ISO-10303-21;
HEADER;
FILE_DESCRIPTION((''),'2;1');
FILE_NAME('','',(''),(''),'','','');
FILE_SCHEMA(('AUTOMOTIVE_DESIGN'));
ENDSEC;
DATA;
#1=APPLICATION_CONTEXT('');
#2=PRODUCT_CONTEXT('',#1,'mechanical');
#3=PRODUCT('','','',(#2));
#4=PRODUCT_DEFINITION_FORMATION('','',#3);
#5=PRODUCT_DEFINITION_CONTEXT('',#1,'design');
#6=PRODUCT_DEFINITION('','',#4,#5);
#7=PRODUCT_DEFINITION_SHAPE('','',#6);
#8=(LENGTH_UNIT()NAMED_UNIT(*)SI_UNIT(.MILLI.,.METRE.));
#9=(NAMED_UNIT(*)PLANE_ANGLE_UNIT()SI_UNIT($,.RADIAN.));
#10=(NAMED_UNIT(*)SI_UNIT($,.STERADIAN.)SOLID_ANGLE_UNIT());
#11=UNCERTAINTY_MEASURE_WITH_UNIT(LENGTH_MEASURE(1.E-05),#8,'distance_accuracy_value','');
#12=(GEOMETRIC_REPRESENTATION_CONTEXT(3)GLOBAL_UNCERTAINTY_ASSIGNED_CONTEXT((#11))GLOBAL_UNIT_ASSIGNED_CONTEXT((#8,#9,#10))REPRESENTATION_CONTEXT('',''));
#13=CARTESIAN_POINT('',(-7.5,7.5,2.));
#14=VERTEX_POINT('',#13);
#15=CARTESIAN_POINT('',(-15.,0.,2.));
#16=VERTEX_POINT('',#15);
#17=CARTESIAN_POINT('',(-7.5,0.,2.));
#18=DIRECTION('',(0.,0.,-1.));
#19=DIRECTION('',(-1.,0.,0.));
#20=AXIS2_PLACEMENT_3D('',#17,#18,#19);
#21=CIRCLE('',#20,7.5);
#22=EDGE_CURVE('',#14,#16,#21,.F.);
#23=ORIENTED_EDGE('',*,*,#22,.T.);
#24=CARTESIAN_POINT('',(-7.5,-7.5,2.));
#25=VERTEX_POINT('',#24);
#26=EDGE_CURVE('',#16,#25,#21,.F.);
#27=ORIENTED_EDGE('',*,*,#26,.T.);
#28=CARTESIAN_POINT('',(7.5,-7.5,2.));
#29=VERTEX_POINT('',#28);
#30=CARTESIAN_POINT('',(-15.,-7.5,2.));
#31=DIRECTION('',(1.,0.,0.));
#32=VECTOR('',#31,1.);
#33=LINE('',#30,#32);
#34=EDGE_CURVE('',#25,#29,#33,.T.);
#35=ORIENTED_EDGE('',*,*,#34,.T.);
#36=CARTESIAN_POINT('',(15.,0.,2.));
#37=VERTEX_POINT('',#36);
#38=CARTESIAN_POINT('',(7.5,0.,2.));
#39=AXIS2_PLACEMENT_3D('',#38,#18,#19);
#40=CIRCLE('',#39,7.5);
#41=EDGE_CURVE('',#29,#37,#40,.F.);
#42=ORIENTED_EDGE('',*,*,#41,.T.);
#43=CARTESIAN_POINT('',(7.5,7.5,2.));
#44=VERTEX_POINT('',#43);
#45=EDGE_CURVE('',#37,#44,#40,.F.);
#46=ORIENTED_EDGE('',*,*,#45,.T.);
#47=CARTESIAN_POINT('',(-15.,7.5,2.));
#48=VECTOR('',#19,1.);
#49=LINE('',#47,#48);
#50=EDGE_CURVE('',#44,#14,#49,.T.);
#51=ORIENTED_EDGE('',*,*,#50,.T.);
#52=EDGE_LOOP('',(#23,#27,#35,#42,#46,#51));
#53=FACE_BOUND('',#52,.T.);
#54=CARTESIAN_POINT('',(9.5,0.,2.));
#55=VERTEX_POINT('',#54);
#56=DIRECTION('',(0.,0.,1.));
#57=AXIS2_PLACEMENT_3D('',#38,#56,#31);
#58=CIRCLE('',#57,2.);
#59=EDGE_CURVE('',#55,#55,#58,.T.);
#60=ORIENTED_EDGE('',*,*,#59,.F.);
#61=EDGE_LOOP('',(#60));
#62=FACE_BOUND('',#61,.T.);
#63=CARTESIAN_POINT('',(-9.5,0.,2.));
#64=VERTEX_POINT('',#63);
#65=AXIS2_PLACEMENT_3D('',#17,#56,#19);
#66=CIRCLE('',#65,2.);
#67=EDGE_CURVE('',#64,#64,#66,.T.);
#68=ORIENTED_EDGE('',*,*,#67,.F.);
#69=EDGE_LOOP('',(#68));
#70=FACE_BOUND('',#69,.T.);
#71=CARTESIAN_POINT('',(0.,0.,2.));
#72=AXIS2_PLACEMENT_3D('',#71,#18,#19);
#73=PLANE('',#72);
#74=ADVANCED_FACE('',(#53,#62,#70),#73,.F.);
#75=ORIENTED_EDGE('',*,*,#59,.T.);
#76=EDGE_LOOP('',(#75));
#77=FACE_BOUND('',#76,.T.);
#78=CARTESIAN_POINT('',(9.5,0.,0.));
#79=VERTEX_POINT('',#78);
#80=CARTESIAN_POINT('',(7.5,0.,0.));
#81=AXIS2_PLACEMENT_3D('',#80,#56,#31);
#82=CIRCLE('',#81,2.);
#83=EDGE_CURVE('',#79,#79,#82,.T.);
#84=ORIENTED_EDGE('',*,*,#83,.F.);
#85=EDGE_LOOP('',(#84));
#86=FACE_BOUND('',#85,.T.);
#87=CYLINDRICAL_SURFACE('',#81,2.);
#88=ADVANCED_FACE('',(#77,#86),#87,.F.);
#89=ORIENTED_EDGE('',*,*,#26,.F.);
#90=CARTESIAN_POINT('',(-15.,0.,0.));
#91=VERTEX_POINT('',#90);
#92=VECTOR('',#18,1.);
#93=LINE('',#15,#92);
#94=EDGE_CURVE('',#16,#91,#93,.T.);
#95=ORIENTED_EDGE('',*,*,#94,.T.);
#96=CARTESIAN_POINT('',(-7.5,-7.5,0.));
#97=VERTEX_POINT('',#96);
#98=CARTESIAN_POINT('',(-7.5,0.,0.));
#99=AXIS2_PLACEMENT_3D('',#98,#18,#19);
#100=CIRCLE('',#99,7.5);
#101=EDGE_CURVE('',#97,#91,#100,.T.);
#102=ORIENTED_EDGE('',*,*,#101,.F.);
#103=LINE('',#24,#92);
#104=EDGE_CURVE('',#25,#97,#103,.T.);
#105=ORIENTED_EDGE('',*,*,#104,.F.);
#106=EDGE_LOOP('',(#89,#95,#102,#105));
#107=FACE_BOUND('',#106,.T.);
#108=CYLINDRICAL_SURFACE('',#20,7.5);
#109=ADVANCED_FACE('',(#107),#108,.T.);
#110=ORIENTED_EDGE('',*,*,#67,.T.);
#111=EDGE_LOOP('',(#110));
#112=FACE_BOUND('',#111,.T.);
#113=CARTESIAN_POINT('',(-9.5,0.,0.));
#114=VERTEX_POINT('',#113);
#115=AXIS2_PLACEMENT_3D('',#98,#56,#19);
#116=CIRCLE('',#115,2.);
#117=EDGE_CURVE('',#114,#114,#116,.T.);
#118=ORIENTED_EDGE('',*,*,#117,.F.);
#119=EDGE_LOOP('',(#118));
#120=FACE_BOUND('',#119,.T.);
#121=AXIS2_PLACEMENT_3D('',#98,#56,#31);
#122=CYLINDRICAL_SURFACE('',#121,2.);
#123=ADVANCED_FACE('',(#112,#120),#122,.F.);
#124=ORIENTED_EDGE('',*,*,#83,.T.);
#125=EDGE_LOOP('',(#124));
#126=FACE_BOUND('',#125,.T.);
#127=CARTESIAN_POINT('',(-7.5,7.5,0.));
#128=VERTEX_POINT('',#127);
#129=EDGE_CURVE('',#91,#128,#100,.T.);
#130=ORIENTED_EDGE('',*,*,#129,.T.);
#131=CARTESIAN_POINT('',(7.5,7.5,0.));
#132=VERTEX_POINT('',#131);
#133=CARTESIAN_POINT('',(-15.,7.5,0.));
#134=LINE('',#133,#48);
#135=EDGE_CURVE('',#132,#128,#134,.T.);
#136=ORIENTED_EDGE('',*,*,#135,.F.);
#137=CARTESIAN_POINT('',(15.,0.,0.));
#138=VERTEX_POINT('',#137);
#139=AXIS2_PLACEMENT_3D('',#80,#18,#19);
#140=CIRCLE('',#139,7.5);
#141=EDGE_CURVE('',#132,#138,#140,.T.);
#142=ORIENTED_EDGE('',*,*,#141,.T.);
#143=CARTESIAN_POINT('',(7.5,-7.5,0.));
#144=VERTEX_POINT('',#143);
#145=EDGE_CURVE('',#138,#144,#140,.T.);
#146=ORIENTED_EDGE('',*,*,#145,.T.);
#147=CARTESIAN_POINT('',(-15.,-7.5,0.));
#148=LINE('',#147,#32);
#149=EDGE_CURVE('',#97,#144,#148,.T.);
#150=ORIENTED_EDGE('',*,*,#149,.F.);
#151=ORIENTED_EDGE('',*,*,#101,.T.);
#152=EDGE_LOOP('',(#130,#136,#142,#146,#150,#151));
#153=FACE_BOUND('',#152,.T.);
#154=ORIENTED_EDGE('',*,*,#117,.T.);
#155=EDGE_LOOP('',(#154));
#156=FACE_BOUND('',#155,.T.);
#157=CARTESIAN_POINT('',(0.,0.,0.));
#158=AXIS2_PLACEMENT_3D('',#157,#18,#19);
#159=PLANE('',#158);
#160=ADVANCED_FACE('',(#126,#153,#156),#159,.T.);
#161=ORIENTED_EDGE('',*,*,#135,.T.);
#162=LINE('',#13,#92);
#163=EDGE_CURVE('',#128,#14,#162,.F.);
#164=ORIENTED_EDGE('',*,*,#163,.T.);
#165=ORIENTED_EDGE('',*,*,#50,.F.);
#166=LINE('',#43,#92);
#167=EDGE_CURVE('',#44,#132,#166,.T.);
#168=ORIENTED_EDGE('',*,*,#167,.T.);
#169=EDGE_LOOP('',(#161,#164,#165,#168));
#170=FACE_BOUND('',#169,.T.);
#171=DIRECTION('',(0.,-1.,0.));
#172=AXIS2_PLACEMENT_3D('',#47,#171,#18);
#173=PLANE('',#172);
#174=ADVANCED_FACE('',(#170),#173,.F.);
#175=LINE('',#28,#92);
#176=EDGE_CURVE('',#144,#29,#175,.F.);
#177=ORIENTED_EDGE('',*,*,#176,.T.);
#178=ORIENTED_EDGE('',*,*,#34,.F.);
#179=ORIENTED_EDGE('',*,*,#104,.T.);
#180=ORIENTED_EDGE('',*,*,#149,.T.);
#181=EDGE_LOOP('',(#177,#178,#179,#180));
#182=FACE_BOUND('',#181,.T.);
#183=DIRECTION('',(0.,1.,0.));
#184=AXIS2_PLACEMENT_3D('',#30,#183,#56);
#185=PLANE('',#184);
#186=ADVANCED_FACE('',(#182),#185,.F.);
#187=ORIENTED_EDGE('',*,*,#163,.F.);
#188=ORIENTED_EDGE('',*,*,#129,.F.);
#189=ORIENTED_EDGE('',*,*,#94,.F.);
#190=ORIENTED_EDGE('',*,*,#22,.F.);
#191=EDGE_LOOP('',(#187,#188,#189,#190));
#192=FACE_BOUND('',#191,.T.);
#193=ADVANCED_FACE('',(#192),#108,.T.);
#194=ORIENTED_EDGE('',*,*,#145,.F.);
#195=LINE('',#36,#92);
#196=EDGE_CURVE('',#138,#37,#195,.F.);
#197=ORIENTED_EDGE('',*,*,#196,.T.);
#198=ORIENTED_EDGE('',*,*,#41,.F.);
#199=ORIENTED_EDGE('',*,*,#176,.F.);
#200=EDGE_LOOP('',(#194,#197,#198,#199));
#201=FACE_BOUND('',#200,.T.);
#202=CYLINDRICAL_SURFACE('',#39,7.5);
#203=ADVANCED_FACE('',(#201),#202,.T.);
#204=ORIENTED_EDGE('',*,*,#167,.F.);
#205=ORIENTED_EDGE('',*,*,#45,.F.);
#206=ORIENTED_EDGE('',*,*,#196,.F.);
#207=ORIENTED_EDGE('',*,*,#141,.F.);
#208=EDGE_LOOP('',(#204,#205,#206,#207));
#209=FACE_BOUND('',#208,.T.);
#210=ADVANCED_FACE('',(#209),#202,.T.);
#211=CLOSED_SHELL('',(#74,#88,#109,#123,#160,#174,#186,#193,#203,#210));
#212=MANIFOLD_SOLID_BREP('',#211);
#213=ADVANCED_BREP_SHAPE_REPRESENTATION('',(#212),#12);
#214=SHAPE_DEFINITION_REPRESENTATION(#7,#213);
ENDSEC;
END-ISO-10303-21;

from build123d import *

# Parameters (mm, degrees)
SKETCH_1_W          = 30
SKETCH_1_H          = 15
EXTRUDE_1_DEPTH     = 2
FILLET_1_R          = 7.5
SKETCH_2_R          = 2
CUT_EXTRUDE_1_DEPTH = 2


with BuildPart() as part:
    # 草图1 → 凸台-拉伸1 (new body)
    with BuildSketch(Plane.XY):
        Rectangle(SKETCH_1_W, SKETCH_1_H)
    extrude(amount=EXTRUDE_1_DEPTH)

    # 圆角1
    fillet_1_edges = [part.edges().sort_by_distance(p)[0] for p in [
        (15, -7.5, 1),
        (-15, -7.5, 1),
        (-15, 7.5, 1),
        (15, 7.5, 1),
    ]]
    fillet(fillet_1_edges, radius=FILLET_1_R - 0.0001)  # a hair under: the kernel refuses the full size

    # 草图2 → 切除-拉伸1 (cut)
    with BuildSketch(Plane.XY.offset(2)):
        with Locations((7.5, 0)):
            Circle(SKETCH_2_R)
        with Locations(Location((-7.5, 0, 0), (0, 0, 180))):
            Circle(SKETCH_2_R)
    extrude(amount=-CUT_EXTRUDE_1_DEPTH, mode=Mode.SUBTRACT)


solid = part.part
